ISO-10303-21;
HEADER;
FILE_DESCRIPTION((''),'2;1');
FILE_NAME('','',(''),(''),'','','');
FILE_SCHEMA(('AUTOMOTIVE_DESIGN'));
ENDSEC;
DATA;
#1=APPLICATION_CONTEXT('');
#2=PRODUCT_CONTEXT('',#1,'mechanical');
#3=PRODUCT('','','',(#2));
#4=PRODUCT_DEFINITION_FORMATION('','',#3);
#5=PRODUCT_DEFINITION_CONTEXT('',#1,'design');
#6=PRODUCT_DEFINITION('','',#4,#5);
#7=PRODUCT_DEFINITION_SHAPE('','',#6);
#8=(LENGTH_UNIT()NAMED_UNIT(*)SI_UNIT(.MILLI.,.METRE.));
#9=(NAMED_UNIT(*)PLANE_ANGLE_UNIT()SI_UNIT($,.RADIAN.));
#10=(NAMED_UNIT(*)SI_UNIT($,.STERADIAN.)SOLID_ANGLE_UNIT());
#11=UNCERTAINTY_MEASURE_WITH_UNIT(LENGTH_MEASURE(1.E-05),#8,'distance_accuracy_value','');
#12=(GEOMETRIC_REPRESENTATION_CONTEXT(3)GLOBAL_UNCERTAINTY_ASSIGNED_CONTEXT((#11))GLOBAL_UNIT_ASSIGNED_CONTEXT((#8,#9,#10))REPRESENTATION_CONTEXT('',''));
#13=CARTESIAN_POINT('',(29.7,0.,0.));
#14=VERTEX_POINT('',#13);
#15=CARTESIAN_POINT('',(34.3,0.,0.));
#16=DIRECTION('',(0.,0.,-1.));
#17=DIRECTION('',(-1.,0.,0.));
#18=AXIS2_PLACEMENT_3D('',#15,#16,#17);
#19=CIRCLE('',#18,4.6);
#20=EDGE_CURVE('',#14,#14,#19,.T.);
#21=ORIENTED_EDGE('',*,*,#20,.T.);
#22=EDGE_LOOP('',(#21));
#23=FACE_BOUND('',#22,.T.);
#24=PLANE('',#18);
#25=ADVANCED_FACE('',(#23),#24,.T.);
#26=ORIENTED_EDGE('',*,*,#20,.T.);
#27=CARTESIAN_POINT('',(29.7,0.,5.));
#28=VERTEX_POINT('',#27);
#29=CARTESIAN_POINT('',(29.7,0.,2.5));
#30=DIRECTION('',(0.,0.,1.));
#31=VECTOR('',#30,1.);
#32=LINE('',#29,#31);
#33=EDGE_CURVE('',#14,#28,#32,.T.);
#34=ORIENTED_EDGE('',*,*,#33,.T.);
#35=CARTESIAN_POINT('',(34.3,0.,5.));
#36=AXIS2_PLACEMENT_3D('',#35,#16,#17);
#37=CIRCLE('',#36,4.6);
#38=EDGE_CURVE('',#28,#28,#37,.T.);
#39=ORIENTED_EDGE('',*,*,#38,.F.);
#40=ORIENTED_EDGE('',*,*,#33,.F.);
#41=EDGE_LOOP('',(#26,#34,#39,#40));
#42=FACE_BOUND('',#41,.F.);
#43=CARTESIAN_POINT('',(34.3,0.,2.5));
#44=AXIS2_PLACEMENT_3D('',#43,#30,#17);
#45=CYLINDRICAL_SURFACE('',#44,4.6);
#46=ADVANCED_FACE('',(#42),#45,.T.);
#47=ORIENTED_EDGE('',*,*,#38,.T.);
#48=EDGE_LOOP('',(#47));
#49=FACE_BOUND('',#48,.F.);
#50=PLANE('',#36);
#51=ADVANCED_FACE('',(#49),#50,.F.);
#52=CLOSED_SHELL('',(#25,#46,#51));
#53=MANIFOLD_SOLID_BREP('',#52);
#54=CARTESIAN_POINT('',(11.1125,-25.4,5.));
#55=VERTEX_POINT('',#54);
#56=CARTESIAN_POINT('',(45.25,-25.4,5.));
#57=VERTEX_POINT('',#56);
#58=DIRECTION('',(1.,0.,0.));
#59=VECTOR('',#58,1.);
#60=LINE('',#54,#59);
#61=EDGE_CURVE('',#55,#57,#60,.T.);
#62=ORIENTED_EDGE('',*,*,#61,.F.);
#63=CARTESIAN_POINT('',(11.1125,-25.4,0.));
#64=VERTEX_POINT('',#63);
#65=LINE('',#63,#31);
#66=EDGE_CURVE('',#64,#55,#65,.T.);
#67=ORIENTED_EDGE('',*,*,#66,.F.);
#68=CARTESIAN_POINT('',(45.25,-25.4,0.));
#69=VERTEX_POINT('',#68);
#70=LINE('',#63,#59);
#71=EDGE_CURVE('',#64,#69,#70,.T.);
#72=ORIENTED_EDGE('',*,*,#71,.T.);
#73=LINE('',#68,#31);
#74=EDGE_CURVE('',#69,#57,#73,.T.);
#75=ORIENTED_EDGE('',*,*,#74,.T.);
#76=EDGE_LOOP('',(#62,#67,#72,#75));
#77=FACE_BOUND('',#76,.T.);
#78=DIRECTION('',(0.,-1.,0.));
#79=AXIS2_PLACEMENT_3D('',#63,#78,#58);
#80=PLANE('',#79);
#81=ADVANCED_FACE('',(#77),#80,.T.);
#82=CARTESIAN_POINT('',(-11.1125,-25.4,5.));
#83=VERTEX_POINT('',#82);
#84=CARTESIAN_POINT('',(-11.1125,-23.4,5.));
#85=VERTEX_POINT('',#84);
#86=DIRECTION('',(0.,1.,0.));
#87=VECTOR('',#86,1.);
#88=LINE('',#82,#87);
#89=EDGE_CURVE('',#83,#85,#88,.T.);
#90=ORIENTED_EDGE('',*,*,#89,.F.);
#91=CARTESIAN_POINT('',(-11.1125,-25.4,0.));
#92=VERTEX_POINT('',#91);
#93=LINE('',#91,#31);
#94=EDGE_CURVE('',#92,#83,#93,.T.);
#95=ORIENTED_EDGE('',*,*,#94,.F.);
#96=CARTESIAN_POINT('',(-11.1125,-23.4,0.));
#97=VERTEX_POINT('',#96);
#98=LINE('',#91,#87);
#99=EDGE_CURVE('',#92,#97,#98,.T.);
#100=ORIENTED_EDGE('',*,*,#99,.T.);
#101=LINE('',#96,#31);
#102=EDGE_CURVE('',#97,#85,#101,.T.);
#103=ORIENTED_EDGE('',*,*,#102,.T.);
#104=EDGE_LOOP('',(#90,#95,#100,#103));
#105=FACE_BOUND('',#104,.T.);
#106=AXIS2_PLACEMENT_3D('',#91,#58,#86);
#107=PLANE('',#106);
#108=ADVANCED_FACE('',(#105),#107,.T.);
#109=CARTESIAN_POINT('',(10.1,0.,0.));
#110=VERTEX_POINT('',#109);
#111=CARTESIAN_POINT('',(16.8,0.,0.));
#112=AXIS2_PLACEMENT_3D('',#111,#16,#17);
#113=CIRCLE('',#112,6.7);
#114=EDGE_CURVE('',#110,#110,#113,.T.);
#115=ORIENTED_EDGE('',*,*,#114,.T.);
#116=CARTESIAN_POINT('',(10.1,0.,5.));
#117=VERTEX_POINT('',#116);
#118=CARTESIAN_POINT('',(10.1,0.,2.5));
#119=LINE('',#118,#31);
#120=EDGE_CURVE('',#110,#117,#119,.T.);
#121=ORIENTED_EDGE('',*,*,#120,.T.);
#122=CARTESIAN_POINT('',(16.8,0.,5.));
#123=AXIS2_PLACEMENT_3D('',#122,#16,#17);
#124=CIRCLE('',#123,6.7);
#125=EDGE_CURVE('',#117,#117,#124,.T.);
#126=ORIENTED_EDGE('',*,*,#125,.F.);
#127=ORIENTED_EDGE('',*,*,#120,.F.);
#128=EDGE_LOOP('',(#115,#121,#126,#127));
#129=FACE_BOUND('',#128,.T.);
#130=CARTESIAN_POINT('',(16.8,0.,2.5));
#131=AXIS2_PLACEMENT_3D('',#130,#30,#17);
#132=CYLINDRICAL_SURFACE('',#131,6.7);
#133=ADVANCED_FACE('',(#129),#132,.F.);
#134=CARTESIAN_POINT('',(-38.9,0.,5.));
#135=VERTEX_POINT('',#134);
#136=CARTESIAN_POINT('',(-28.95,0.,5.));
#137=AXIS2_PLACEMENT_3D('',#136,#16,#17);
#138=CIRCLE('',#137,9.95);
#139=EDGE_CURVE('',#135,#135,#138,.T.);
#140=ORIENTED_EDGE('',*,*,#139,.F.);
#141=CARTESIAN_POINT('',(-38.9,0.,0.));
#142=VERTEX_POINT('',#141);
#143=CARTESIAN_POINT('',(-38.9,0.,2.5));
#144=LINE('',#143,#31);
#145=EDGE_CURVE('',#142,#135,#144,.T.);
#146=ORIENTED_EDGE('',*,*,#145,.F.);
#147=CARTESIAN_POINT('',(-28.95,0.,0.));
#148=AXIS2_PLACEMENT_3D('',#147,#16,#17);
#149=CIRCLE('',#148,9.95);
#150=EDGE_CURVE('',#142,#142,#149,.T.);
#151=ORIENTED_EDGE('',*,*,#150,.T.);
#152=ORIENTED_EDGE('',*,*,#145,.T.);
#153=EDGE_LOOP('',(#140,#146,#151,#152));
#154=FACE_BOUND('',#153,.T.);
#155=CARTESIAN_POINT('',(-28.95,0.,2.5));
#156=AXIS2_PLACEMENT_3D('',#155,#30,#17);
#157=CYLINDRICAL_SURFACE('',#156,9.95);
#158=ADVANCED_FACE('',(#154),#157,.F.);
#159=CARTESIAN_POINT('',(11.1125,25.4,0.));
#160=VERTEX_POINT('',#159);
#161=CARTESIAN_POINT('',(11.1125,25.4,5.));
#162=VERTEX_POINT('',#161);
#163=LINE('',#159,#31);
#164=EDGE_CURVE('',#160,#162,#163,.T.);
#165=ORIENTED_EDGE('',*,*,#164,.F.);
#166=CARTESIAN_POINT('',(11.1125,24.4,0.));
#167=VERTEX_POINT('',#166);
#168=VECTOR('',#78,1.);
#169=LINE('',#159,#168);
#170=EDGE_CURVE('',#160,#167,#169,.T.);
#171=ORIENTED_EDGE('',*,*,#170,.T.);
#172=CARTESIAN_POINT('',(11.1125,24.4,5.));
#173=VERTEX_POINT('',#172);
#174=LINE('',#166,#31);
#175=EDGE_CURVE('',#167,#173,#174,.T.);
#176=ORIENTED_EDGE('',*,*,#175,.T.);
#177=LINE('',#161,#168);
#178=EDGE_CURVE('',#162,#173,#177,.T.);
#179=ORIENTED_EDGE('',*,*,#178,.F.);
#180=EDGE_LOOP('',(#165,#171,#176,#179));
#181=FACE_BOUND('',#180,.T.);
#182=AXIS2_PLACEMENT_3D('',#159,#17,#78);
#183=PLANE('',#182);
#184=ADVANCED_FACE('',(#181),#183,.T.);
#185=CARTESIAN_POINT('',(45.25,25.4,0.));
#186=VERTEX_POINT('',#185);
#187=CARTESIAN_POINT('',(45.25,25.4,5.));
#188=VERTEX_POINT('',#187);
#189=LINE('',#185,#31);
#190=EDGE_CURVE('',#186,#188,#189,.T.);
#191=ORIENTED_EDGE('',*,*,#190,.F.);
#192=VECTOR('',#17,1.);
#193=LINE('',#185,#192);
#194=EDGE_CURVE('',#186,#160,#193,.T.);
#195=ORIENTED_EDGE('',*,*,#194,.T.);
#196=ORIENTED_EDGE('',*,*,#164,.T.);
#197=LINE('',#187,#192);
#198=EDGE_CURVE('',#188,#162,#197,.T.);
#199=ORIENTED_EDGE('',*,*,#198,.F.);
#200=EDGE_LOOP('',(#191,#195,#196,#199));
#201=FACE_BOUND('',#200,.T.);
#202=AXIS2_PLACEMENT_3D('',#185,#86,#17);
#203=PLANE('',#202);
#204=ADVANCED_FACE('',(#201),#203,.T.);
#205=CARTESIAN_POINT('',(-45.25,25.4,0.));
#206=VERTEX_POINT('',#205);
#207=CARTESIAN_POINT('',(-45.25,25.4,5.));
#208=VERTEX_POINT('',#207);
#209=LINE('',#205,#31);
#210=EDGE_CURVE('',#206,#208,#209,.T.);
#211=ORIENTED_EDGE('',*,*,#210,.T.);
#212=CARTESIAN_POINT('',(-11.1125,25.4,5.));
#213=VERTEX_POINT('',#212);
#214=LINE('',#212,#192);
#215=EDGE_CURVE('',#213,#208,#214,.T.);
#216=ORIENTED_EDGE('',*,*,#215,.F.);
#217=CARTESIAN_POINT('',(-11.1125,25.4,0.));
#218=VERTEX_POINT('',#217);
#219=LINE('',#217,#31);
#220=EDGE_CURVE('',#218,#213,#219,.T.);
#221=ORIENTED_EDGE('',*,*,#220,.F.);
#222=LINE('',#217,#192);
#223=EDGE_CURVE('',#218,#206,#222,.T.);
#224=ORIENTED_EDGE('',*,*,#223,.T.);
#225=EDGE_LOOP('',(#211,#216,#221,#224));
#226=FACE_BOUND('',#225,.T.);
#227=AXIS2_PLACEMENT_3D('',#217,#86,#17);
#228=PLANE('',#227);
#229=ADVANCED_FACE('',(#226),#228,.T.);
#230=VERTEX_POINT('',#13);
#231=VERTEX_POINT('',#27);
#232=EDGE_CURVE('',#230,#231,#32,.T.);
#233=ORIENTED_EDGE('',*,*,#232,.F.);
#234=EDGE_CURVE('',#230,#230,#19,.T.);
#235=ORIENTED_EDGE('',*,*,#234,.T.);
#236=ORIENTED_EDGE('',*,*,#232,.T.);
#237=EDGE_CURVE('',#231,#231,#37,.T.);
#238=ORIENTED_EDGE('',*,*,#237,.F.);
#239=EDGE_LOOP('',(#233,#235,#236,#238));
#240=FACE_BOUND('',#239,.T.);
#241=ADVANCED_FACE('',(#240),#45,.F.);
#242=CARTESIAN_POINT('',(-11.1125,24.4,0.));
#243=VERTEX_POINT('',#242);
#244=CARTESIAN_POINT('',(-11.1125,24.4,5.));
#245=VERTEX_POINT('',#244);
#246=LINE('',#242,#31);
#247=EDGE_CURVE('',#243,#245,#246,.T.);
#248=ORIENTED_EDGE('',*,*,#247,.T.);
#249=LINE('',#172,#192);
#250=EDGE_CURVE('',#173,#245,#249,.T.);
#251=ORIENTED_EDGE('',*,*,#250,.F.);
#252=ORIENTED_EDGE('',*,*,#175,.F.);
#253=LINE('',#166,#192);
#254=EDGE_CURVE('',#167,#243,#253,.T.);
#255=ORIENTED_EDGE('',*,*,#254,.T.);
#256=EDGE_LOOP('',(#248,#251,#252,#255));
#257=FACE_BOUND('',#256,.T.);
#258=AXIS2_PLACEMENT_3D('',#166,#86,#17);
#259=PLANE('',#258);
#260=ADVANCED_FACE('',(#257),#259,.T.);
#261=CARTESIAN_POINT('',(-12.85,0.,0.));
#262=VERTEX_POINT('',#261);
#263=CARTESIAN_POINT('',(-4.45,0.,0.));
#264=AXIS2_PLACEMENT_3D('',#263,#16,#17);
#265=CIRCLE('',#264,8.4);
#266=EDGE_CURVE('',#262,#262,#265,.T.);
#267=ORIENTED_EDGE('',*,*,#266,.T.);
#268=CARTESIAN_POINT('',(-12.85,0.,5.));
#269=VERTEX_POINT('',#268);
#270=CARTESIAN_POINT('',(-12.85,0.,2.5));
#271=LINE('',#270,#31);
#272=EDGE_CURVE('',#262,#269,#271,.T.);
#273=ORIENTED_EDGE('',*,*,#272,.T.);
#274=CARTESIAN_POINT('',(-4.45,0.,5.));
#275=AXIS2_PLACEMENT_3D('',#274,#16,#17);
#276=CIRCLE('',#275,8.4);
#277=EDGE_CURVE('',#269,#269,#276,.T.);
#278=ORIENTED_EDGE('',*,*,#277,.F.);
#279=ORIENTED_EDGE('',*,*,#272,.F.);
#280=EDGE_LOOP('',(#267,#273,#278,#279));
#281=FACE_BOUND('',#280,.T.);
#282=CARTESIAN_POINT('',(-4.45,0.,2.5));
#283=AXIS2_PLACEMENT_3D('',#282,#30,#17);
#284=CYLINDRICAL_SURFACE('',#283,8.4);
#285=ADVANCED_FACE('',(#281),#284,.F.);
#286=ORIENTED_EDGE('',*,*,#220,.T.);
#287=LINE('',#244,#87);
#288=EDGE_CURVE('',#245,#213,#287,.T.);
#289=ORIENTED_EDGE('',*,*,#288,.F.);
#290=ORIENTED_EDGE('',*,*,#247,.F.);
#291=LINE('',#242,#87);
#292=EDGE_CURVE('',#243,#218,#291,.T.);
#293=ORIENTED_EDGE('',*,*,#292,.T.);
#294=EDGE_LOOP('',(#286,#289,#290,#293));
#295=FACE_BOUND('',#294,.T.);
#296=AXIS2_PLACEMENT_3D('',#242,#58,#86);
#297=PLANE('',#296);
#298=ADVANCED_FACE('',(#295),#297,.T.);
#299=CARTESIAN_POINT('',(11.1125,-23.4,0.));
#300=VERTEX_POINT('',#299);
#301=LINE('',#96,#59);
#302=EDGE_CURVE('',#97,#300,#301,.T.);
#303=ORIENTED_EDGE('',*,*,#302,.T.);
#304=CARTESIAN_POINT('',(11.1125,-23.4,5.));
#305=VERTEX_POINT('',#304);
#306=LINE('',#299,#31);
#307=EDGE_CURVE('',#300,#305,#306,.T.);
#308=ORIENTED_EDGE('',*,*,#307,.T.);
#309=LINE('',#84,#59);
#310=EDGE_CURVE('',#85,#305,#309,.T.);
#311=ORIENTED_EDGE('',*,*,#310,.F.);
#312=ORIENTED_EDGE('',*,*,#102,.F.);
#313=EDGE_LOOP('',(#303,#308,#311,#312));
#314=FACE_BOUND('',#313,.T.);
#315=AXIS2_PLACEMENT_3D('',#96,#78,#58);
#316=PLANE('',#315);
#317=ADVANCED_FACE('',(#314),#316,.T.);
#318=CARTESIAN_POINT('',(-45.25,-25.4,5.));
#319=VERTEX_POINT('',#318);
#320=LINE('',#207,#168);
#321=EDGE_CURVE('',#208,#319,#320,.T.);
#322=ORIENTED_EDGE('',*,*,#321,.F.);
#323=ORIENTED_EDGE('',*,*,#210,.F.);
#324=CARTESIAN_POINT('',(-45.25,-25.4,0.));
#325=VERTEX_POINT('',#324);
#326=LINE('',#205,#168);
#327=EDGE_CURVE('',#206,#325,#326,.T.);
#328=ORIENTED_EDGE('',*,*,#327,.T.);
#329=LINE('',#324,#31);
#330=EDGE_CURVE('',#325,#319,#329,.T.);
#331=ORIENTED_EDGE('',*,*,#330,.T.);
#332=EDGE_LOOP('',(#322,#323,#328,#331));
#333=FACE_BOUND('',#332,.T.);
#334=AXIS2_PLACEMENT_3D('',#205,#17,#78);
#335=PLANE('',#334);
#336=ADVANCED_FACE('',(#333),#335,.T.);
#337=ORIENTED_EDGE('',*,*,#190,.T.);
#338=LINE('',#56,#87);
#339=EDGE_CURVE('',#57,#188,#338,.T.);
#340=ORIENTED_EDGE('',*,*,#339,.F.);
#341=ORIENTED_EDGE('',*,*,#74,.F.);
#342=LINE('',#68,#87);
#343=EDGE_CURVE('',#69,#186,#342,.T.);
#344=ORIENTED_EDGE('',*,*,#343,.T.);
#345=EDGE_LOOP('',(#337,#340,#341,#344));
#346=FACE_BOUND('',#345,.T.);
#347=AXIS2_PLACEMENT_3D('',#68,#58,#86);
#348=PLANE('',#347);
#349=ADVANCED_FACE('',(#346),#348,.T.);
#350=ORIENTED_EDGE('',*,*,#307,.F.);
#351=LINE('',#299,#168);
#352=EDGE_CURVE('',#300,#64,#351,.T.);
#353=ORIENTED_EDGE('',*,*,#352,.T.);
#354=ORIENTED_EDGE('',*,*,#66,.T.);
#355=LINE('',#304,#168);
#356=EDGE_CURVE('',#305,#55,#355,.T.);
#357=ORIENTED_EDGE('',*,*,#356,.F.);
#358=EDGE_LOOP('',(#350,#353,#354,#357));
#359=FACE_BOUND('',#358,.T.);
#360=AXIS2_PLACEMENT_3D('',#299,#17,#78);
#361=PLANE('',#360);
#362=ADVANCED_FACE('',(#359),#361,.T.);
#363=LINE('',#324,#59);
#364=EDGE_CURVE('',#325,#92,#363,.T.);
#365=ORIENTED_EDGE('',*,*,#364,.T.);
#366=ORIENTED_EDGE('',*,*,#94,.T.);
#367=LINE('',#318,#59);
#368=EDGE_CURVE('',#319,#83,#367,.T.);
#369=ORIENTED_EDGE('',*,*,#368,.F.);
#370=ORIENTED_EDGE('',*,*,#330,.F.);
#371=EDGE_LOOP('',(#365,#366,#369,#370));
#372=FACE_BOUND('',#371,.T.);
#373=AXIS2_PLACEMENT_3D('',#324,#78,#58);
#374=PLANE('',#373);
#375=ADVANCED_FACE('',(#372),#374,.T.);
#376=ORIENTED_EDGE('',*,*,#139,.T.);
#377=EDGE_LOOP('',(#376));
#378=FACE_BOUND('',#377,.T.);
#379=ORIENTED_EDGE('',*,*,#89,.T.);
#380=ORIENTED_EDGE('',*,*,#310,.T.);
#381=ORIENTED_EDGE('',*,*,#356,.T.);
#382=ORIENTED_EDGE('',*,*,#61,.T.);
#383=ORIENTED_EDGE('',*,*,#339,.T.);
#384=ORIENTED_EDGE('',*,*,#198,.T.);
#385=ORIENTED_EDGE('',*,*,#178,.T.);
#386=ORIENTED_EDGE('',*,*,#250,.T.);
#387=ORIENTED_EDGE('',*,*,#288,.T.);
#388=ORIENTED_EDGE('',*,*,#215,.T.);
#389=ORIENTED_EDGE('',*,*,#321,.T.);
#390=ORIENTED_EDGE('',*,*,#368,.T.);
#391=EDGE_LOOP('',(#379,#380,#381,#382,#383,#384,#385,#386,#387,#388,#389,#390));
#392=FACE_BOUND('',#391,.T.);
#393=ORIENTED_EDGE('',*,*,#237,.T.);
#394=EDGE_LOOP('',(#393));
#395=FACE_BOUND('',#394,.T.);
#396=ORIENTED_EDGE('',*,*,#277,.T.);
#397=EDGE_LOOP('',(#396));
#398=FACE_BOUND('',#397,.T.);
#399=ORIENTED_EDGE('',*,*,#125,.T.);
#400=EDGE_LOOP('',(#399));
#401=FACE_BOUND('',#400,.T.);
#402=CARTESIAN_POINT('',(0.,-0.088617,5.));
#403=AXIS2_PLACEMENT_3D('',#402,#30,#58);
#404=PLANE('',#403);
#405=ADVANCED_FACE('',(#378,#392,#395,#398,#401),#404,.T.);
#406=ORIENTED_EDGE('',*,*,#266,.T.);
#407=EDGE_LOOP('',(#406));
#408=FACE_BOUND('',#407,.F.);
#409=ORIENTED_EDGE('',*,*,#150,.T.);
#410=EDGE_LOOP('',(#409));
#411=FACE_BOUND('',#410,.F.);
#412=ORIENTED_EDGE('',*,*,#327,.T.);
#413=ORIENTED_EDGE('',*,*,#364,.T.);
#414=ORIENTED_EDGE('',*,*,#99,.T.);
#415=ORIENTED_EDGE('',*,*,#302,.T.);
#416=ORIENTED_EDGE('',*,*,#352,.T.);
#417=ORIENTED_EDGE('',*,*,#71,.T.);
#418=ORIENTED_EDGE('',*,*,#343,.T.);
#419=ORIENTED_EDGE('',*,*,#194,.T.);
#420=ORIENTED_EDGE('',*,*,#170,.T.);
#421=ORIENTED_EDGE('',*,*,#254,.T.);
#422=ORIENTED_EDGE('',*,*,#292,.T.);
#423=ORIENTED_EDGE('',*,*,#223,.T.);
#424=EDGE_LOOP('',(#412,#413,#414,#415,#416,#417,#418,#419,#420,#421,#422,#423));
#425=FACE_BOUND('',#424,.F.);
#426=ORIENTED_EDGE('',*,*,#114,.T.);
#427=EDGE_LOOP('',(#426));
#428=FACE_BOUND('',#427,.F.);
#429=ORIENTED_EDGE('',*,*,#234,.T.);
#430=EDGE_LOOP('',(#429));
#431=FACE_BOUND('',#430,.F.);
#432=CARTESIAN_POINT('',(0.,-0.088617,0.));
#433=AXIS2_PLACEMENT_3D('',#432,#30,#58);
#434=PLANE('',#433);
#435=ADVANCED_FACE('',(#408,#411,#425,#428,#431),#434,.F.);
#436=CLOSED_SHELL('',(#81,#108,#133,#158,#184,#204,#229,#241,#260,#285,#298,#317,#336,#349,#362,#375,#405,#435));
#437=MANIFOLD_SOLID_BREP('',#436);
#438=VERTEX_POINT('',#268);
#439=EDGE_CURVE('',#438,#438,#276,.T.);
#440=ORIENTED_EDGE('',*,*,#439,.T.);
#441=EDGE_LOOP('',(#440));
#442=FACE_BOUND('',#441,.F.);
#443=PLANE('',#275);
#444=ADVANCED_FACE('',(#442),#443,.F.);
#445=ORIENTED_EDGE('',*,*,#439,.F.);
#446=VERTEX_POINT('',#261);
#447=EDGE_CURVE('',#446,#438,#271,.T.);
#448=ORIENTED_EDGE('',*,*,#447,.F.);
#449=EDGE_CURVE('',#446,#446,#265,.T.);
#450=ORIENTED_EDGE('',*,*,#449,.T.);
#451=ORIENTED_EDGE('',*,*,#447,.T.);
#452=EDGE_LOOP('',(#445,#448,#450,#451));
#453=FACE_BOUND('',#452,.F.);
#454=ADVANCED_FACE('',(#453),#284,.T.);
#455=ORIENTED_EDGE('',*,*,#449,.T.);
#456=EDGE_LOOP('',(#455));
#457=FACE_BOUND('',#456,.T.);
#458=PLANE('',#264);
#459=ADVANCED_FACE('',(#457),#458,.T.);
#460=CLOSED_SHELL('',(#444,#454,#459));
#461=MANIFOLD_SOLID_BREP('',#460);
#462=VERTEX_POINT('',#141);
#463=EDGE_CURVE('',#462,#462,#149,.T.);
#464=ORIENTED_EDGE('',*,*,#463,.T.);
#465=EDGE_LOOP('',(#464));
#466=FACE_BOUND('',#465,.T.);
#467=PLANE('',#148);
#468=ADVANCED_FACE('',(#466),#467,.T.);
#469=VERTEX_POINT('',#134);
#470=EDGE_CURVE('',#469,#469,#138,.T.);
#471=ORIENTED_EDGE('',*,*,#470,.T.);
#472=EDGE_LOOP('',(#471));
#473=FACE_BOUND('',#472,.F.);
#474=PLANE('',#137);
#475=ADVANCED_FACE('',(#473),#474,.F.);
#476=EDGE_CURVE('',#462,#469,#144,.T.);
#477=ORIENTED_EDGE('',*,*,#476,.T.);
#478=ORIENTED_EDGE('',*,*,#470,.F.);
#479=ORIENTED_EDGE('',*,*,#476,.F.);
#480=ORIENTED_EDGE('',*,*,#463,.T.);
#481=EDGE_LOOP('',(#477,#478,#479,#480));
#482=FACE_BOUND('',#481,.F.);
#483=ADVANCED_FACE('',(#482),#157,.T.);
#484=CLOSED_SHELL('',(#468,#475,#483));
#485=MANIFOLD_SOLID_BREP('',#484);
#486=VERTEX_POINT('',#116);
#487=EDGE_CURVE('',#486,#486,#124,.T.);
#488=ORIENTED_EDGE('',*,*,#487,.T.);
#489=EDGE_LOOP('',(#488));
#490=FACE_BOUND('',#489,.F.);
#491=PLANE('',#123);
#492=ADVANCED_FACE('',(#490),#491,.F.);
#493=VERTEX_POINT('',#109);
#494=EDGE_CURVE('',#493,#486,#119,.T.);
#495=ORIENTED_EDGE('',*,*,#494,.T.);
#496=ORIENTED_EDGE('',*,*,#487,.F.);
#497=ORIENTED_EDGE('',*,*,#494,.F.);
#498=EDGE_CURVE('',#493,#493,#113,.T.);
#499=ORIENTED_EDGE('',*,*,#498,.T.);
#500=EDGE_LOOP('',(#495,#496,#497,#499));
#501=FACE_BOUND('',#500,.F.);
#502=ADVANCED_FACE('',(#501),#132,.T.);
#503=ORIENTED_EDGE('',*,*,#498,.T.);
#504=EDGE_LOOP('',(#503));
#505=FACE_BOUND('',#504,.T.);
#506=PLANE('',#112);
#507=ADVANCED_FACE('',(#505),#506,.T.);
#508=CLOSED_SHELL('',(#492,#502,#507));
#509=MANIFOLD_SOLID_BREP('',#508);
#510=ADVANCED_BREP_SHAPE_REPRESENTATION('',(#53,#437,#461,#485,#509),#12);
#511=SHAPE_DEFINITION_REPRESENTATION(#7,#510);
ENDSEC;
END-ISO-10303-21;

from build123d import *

# Parameters (mm, degrees)
F0_W   = 9.95
F0_H   = 5
F0_W_2 = 8.4
F0_W_3 = 6.7
F0_W_4 = 4.6


# Not quite as in the source:
# - a feature names something its author has since deleted; it is built from what else it names


with BuildPart() as f2:
    # F2: sweep along a path in F0
    with BuildLine(Plane.XZ) as f2_path:
        Line((-38.9, 0), (-38.9, 5))
    # F1 (on Top) → F2 (sweep)
    with BuildSketch(Plane.XY):
        Polygon((-11.1125, 25.4), (-45.25, 25.4), (-45.25, -25.4), (-11.1125, -25.4), (-11.1125, -23.4), (11.1125, -23.4), (11.1125, -25.4), (45.25, -25.4), (45.25, 25.4), (11.1125, 25.4), (11.1125, 24.4), (-11.1125, 24.4), align=None)
    sweep(path=f2_path.line)


with BuildPart() as f3:
    # F0 (on Front) → F3 (revolve)
    with BuildSketch(Plane.XZ):
        with Locations((-33.925, 2.5)):
            Rectangle(F0_W, F0_H)
    revolve(axis=Axis((-28.95, 0, 2.5), (0, 0, -1)))


with BuildPart() as f4:
    # F0 (on Front) → F4 (revolve)
    with BuildSketch(Plane.XZ):
        with Locations((-8.65, 2.5)):
            Rectangle(F0_W_2, F0_H)
    revolve(axis=Axis((-4.45, 0, 2.5), (0, 0, -1)))


with BuildPart() as f5:
    # F0 (on Front) → F5 (revolve)
    with BuildSketch(Plane.XZ):
        with Locations((13.45, 2.5)):
            Rectangle(F0_W_3, F0_H)
    revolve(axis=Axis((16.8, 0, 2.5), (0, 0, -1)))


with BuildPart() as f6:
    # F0 (on Front) → F6 (revolve)
    with BuildSketch(Plane.XZ):
        with Locations((32, 2.5)):
            Rectangle(F0_W_4, F0_H)
    revolve(axis=Axis((34.3, 0, 2.5), (0, 0, -1)))


with BuildPart() as f2_1:
    add(f2.part)

    # F7: cut F3, F4, F6, F5
    add(f3.part, mode=Mode.SUBTRACT)
    add(f4.part, mode=Mode.SUBTRACT)
    add(f6.part, mode=Mode.SUBTRACT)
    add(f5.part, mode=Mode.SUBTRACT)


solid = Compound([f3.part, f4.part, f5.part, f6.part, f2_1.part])
